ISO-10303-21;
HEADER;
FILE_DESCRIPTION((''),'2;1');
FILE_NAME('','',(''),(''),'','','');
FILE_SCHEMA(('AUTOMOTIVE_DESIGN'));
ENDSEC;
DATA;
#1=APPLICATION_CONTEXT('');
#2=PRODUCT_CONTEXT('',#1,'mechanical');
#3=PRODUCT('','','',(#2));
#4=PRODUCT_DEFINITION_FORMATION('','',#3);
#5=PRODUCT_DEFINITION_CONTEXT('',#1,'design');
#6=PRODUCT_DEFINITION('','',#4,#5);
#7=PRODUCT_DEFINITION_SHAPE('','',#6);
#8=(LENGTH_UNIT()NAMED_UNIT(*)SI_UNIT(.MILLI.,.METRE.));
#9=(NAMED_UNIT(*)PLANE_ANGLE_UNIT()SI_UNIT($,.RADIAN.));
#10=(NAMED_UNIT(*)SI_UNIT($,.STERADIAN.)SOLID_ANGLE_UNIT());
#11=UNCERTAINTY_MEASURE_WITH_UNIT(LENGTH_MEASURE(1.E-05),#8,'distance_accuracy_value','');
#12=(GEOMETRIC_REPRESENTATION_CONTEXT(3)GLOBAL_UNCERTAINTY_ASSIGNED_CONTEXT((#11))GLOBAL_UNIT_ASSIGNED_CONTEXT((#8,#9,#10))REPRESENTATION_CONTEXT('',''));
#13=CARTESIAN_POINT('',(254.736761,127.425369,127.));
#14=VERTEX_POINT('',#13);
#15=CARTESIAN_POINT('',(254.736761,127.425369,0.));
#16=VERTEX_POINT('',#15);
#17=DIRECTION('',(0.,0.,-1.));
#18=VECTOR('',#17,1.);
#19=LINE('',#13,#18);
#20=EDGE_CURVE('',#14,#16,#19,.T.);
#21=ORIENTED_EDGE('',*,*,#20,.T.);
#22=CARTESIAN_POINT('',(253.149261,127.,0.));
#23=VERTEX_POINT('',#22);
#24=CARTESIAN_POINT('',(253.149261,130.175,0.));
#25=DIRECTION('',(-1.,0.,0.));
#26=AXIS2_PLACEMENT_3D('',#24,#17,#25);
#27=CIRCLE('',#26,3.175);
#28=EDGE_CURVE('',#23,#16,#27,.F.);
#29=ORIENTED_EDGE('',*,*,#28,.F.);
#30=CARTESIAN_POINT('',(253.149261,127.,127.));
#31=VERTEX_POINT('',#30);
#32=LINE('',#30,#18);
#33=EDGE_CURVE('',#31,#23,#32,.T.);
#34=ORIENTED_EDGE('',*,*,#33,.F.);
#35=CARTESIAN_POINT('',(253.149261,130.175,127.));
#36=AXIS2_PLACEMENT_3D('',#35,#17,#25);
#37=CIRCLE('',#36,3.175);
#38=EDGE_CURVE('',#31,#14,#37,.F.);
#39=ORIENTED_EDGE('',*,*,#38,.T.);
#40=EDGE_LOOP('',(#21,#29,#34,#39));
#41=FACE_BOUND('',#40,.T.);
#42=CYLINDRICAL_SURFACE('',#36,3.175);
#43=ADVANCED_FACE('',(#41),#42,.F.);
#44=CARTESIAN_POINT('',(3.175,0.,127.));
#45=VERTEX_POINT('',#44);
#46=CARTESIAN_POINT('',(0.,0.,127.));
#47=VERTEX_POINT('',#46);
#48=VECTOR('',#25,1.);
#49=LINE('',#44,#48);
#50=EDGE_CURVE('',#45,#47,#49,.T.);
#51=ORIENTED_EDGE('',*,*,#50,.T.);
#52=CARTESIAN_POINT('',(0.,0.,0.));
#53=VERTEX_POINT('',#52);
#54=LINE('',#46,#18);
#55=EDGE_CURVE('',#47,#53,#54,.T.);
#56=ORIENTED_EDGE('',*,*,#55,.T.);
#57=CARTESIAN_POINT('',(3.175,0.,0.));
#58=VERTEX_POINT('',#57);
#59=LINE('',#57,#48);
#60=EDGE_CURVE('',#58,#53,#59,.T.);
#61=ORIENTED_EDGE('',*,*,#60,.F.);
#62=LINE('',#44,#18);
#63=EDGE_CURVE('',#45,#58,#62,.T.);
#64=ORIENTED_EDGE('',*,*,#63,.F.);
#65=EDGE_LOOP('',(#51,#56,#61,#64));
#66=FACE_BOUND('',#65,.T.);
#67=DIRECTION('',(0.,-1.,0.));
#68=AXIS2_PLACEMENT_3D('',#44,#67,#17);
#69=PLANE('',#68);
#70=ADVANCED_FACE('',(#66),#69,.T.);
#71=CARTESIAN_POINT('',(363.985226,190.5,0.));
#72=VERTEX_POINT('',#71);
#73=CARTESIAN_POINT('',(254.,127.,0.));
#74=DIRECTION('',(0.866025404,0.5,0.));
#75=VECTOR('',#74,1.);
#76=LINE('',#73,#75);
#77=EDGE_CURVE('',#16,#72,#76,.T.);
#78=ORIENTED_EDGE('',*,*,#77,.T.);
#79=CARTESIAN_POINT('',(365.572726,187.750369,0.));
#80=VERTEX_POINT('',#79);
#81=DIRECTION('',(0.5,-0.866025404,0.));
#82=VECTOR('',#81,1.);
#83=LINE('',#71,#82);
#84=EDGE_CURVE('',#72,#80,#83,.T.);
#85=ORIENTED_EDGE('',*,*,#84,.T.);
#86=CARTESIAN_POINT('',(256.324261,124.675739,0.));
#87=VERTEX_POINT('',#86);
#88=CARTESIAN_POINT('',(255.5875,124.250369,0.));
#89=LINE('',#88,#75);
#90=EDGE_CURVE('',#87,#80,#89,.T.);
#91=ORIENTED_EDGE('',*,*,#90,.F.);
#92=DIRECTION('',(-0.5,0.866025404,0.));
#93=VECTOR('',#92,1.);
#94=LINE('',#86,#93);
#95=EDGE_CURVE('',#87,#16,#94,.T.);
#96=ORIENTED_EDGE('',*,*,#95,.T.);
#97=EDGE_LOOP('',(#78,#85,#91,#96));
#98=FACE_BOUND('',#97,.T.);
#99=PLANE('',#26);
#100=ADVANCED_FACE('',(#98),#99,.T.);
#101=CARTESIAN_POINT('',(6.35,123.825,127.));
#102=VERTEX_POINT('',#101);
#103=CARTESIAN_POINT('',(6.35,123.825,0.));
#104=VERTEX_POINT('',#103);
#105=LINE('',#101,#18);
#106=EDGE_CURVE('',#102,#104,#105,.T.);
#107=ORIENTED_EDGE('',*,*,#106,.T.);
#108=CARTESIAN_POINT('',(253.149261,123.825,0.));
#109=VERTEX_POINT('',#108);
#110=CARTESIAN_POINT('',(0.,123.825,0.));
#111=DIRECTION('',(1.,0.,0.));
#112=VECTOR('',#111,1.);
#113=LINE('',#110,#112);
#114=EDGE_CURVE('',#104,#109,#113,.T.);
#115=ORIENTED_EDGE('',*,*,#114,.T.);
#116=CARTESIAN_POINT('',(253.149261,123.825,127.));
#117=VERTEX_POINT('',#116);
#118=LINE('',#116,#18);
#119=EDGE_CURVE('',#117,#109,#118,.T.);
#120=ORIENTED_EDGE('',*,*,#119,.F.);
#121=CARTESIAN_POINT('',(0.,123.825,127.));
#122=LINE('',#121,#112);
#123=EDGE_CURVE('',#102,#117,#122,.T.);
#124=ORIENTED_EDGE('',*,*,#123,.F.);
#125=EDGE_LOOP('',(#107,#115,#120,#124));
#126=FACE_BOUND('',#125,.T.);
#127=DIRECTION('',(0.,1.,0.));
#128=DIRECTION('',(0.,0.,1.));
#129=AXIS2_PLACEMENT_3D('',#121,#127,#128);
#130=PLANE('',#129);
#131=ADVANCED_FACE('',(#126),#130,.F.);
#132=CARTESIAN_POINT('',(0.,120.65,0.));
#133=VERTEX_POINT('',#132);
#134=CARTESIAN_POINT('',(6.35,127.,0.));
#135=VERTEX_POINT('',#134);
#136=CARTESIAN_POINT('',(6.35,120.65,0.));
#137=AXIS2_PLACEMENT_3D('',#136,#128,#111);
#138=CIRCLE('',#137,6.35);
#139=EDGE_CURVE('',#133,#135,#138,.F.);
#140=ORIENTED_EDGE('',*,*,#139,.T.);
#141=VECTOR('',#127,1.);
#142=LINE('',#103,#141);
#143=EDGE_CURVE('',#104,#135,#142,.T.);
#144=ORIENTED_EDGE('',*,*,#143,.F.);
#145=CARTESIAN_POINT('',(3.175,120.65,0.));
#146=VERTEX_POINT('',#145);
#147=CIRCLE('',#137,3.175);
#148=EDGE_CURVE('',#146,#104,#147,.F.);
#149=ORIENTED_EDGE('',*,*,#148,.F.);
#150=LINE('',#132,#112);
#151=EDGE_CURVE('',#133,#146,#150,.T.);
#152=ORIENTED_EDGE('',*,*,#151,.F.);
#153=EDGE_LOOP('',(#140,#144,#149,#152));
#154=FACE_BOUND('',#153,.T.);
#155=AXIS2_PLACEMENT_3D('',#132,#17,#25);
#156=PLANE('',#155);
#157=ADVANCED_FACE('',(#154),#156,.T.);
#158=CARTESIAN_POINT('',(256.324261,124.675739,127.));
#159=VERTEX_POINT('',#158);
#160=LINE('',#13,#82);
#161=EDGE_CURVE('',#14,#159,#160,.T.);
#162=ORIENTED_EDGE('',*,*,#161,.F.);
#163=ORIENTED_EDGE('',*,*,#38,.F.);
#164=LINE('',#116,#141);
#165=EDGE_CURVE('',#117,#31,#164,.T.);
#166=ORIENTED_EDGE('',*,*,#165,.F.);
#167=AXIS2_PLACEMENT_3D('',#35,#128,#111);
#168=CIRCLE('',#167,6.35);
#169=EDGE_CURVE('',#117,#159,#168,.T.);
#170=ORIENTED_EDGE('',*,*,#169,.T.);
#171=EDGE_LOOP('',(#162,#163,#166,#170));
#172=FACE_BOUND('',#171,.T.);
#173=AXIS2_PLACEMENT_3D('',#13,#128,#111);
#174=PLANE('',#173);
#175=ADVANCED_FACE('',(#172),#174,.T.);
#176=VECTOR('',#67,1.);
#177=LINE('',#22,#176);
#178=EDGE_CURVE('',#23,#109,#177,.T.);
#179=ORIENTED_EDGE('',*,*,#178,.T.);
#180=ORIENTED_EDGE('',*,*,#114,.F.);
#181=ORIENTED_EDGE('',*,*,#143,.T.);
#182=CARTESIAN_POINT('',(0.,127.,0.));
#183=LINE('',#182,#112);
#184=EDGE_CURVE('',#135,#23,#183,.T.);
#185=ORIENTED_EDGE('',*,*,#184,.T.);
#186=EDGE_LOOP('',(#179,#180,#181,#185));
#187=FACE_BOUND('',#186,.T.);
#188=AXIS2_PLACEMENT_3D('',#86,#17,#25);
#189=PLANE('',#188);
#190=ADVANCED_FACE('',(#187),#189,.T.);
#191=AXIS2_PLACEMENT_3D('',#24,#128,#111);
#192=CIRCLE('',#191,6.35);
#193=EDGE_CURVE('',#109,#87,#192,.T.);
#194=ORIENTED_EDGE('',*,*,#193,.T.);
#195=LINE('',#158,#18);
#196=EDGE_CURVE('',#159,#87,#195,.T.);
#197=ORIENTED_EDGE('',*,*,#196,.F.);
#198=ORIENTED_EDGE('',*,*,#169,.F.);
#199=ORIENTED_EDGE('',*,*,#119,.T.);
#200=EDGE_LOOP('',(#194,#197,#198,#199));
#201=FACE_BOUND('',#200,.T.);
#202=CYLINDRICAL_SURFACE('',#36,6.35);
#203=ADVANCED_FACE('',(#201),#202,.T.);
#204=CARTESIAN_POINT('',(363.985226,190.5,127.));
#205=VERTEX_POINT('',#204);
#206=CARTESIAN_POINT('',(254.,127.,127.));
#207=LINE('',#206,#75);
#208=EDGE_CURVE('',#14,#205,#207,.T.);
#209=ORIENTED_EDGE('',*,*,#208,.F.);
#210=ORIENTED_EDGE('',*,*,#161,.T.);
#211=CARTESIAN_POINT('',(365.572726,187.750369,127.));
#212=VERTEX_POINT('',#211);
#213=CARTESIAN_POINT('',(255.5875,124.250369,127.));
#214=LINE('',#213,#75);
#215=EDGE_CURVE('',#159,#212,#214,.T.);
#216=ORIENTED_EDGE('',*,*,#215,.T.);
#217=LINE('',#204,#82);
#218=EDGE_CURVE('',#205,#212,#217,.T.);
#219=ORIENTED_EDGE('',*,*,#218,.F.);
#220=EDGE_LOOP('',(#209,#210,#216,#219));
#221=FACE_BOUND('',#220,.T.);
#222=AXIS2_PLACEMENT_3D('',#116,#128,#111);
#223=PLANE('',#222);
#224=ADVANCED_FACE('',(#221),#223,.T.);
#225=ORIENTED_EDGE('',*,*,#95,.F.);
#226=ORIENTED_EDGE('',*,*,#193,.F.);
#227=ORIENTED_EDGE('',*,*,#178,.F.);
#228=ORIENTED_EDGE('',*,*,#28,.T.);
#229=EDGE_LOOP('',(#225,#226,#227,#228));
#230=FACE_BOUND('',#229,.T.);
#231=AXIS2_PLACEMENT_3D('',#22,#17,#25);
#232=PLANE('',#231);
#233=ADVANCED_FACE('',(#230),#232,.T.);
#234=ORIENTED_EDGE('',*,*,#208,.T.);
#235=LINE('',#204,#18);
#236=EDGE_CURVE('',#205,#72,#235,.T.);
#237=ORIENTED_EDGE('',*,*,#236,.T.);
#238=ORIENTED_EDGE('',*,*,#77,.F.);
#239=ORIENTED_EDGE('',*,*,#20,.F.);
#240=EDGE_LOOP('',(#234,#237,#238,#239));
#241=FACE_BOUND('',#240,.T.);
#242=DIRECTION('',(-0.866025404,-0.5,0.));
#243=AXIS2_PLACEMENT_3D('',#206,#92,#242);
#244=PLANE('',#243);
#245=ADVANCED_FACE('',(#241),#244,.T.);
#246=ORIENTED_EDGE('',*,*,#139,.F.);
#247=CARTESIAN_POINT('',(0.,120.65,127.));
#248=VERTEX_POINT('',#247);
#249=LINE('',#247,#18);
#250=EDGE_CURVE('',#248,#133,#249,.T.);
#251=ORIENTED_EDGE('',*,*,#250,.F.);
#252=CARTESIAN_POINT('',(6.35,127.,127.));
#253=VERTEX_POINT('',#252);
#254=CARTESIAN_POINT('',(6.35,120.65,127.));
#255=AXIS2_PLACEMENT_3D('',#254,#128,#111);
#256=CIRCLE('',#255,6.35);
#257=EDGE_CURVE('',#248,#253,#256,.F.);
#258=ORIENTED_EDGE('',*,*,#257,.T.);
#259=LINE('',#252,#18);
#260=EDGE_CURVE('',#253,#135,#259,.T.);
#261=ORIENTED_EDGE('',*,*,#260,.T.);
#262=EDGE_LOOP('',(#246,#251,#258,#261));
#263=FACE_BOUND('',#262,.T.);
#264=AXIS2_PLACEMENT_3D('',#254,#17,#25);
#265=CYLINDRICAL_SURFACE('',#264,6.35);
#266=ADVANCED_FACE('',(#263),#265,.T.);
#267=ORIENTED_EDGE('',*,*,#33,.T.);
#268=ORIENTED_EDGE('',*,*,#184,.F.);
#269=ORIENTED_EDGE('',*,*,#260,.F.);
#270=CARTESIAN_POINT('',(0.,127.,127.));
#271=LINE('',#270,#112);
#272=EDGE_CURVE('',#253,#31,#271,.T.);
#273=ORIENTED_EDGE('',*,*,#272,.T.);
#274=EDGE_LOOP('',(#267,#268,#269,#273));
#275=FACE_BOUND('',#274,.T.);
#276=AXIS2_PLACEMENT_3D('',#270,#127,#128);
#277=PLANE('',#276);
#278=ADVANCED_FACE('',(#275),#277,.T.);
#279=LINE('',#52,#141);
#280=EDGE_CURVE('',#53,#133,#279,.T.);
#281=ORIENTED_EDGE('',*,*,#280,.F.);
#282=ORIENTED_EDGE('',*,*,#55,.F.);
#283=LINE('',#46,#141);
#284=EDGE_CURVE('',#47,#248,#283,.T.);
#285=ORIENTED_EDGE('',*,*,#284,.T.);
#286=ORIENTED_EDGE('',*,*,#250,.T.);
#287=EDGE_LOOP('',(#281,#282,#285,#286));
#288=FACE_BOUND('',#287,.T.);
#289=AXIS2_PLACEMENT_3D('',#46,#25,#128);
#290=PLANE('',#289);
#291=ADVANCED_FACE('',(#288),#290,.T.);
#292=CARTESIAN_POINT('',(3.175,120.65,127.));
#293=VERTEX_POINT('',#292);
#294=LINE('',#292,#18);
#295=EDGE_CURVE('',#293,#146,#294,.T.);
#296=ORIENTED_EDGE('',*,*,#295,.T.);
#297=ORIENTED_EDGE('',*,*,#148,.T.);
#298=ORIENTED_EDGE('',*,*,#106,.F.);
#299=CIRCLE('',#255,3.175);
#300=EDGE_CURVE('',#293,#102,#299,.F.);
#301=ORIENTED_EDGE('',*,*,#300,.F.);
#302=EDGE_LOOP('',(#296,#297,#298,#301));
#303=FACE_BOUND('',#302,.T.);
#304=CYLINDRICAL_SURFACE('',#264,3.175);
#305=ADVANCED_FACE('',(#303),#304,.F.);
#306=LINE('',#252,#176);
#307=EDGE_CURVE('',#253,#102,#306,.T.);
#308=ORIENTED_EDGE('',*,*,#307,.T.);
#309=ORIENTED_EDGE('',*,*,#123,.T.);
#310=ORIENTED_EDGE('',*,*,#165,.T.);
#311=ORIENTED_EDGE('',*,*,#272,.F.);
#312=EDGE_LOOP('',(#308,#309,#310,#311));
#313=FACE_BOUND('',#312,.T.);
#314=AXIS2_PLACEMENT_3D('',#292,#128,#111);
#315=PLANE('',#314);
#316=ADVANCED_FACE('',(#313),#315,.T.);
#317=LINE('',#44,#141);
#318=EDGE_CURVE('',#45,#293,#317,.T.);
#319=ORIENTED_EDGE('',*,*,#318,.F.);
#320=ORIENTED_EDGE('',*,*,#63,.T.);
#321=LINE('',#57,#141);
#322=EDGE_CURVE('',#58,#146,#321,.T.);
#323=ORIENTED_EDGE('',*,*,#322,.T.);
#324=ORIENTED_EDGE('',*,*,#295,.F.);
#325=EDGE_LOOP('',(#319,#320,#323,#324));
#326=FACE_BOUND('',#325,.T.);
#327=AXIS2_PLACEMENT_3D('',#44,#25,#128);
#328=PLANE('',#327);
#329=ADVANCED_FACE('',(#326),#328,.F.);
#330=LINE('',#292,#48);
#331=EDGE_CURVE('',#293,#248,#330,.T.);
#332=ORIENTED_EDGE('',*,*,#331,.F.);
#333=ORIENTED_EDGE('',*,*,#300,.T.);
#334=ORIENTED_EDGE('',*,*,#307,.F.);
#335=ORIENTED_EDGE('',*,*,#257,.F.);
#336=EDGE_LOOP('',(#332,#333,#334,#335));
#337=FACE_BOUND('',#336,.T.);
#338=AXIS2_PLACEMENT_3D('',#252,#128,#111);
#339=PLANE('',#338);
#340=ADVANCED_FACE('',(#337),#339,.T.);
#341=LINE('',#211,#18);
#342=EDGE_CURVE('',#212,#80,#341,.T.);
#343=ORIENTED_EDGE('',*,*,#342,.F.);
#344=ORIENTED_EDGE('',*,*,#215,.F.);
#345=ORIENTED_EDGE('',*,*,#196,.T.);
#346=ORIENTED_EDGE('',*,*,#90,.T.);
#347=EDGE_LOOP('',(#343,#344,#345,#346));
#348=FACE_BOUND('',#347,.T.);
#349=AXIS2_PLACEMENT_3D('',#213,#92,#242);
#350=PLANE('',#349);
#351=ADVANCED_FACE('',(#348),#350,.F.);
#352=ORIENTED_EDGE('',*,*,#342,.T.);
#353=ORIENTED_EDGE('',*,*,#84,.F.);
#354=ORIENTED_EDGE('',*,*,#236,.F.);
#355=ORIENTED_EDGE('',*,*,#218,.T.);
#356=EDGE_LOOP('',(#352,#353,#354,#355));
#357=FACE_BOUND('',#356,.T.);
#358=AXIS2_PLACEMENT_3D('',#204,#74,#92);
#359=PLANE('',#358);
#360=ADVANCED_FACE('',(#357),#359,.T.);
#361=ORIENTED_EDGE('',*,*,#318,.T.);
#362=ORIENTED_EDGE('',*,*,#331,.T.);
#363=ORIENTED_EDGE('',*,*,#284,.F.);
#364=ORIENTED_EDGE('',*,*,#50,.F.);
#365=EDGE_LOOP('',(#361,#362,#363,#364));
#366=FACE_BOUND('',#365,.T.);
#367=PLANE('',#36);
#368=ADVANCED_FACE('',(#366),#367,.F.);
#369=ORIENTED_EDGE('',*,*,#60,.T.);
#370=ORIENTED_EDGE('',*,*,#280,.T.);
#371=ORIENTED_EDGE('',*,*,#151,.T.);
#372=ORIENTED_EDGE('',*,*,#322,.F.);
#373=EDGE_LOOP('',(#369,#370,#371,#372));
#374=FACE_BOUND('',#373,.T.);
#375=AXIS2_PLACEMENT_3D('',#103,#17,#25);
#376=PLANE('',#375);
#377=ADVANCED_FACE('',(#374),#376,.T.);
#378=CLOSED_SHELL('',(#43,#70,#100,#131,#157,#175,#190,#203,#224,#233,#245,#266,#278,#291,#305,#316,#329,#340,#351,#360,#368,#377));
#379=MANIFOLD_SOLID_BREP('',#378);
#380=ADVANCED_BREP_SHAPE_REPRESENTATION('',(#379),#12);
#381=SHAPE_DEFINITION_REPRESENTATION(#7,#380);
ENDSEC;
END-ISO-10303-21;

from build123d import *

# Parameters (mm, degrees)
BASE_FLANGE1_DEPTH = 127


# Sheet-metal steps are written as plain solids
with BuildPart() as part:
    # Sketch2 → Base-Flange1 (new body)
    with BuildSketch(Plane.XY):
        with BuildLine():
            Line((0, 0), (0, 120.65))
            ThreePointArc((0, 120.65), (1.859871939, 125.140128061), (6.35, 127))
            Line((6.35, 127), (253.149261314, 127))
            ThreePointArc((253.149261314, 127), (253.971011782, 127.108185502), (254.736761314, 127.425369343))
            Line((254.736761314, 127.425369343), (363.985226281, 190.5))
            Line((363.985226281, 190.5), (365.572726281, 187.750369343))
            Line((365.572726281, 187.750369343), (256.324261314, 124.675738686))
            ThreePointArc((256.324261314, 124.675738686), (254.79276225, 124.041371003), (253.149261314, 123.825))
            Line((253.149261314, 123.825), (6.35, 123.825))
            ThreePointArc((6.35, 123.825), (4.10493597, 122.89506403), (3.175, 120.65))
            Line((3.175, 120.65), (3.175, 0))
            Line((3.175, 0), (0, 0))
        make_face()
    extrude(amount=BASE_FLANGE1_DEPTH)


solid = part.part
